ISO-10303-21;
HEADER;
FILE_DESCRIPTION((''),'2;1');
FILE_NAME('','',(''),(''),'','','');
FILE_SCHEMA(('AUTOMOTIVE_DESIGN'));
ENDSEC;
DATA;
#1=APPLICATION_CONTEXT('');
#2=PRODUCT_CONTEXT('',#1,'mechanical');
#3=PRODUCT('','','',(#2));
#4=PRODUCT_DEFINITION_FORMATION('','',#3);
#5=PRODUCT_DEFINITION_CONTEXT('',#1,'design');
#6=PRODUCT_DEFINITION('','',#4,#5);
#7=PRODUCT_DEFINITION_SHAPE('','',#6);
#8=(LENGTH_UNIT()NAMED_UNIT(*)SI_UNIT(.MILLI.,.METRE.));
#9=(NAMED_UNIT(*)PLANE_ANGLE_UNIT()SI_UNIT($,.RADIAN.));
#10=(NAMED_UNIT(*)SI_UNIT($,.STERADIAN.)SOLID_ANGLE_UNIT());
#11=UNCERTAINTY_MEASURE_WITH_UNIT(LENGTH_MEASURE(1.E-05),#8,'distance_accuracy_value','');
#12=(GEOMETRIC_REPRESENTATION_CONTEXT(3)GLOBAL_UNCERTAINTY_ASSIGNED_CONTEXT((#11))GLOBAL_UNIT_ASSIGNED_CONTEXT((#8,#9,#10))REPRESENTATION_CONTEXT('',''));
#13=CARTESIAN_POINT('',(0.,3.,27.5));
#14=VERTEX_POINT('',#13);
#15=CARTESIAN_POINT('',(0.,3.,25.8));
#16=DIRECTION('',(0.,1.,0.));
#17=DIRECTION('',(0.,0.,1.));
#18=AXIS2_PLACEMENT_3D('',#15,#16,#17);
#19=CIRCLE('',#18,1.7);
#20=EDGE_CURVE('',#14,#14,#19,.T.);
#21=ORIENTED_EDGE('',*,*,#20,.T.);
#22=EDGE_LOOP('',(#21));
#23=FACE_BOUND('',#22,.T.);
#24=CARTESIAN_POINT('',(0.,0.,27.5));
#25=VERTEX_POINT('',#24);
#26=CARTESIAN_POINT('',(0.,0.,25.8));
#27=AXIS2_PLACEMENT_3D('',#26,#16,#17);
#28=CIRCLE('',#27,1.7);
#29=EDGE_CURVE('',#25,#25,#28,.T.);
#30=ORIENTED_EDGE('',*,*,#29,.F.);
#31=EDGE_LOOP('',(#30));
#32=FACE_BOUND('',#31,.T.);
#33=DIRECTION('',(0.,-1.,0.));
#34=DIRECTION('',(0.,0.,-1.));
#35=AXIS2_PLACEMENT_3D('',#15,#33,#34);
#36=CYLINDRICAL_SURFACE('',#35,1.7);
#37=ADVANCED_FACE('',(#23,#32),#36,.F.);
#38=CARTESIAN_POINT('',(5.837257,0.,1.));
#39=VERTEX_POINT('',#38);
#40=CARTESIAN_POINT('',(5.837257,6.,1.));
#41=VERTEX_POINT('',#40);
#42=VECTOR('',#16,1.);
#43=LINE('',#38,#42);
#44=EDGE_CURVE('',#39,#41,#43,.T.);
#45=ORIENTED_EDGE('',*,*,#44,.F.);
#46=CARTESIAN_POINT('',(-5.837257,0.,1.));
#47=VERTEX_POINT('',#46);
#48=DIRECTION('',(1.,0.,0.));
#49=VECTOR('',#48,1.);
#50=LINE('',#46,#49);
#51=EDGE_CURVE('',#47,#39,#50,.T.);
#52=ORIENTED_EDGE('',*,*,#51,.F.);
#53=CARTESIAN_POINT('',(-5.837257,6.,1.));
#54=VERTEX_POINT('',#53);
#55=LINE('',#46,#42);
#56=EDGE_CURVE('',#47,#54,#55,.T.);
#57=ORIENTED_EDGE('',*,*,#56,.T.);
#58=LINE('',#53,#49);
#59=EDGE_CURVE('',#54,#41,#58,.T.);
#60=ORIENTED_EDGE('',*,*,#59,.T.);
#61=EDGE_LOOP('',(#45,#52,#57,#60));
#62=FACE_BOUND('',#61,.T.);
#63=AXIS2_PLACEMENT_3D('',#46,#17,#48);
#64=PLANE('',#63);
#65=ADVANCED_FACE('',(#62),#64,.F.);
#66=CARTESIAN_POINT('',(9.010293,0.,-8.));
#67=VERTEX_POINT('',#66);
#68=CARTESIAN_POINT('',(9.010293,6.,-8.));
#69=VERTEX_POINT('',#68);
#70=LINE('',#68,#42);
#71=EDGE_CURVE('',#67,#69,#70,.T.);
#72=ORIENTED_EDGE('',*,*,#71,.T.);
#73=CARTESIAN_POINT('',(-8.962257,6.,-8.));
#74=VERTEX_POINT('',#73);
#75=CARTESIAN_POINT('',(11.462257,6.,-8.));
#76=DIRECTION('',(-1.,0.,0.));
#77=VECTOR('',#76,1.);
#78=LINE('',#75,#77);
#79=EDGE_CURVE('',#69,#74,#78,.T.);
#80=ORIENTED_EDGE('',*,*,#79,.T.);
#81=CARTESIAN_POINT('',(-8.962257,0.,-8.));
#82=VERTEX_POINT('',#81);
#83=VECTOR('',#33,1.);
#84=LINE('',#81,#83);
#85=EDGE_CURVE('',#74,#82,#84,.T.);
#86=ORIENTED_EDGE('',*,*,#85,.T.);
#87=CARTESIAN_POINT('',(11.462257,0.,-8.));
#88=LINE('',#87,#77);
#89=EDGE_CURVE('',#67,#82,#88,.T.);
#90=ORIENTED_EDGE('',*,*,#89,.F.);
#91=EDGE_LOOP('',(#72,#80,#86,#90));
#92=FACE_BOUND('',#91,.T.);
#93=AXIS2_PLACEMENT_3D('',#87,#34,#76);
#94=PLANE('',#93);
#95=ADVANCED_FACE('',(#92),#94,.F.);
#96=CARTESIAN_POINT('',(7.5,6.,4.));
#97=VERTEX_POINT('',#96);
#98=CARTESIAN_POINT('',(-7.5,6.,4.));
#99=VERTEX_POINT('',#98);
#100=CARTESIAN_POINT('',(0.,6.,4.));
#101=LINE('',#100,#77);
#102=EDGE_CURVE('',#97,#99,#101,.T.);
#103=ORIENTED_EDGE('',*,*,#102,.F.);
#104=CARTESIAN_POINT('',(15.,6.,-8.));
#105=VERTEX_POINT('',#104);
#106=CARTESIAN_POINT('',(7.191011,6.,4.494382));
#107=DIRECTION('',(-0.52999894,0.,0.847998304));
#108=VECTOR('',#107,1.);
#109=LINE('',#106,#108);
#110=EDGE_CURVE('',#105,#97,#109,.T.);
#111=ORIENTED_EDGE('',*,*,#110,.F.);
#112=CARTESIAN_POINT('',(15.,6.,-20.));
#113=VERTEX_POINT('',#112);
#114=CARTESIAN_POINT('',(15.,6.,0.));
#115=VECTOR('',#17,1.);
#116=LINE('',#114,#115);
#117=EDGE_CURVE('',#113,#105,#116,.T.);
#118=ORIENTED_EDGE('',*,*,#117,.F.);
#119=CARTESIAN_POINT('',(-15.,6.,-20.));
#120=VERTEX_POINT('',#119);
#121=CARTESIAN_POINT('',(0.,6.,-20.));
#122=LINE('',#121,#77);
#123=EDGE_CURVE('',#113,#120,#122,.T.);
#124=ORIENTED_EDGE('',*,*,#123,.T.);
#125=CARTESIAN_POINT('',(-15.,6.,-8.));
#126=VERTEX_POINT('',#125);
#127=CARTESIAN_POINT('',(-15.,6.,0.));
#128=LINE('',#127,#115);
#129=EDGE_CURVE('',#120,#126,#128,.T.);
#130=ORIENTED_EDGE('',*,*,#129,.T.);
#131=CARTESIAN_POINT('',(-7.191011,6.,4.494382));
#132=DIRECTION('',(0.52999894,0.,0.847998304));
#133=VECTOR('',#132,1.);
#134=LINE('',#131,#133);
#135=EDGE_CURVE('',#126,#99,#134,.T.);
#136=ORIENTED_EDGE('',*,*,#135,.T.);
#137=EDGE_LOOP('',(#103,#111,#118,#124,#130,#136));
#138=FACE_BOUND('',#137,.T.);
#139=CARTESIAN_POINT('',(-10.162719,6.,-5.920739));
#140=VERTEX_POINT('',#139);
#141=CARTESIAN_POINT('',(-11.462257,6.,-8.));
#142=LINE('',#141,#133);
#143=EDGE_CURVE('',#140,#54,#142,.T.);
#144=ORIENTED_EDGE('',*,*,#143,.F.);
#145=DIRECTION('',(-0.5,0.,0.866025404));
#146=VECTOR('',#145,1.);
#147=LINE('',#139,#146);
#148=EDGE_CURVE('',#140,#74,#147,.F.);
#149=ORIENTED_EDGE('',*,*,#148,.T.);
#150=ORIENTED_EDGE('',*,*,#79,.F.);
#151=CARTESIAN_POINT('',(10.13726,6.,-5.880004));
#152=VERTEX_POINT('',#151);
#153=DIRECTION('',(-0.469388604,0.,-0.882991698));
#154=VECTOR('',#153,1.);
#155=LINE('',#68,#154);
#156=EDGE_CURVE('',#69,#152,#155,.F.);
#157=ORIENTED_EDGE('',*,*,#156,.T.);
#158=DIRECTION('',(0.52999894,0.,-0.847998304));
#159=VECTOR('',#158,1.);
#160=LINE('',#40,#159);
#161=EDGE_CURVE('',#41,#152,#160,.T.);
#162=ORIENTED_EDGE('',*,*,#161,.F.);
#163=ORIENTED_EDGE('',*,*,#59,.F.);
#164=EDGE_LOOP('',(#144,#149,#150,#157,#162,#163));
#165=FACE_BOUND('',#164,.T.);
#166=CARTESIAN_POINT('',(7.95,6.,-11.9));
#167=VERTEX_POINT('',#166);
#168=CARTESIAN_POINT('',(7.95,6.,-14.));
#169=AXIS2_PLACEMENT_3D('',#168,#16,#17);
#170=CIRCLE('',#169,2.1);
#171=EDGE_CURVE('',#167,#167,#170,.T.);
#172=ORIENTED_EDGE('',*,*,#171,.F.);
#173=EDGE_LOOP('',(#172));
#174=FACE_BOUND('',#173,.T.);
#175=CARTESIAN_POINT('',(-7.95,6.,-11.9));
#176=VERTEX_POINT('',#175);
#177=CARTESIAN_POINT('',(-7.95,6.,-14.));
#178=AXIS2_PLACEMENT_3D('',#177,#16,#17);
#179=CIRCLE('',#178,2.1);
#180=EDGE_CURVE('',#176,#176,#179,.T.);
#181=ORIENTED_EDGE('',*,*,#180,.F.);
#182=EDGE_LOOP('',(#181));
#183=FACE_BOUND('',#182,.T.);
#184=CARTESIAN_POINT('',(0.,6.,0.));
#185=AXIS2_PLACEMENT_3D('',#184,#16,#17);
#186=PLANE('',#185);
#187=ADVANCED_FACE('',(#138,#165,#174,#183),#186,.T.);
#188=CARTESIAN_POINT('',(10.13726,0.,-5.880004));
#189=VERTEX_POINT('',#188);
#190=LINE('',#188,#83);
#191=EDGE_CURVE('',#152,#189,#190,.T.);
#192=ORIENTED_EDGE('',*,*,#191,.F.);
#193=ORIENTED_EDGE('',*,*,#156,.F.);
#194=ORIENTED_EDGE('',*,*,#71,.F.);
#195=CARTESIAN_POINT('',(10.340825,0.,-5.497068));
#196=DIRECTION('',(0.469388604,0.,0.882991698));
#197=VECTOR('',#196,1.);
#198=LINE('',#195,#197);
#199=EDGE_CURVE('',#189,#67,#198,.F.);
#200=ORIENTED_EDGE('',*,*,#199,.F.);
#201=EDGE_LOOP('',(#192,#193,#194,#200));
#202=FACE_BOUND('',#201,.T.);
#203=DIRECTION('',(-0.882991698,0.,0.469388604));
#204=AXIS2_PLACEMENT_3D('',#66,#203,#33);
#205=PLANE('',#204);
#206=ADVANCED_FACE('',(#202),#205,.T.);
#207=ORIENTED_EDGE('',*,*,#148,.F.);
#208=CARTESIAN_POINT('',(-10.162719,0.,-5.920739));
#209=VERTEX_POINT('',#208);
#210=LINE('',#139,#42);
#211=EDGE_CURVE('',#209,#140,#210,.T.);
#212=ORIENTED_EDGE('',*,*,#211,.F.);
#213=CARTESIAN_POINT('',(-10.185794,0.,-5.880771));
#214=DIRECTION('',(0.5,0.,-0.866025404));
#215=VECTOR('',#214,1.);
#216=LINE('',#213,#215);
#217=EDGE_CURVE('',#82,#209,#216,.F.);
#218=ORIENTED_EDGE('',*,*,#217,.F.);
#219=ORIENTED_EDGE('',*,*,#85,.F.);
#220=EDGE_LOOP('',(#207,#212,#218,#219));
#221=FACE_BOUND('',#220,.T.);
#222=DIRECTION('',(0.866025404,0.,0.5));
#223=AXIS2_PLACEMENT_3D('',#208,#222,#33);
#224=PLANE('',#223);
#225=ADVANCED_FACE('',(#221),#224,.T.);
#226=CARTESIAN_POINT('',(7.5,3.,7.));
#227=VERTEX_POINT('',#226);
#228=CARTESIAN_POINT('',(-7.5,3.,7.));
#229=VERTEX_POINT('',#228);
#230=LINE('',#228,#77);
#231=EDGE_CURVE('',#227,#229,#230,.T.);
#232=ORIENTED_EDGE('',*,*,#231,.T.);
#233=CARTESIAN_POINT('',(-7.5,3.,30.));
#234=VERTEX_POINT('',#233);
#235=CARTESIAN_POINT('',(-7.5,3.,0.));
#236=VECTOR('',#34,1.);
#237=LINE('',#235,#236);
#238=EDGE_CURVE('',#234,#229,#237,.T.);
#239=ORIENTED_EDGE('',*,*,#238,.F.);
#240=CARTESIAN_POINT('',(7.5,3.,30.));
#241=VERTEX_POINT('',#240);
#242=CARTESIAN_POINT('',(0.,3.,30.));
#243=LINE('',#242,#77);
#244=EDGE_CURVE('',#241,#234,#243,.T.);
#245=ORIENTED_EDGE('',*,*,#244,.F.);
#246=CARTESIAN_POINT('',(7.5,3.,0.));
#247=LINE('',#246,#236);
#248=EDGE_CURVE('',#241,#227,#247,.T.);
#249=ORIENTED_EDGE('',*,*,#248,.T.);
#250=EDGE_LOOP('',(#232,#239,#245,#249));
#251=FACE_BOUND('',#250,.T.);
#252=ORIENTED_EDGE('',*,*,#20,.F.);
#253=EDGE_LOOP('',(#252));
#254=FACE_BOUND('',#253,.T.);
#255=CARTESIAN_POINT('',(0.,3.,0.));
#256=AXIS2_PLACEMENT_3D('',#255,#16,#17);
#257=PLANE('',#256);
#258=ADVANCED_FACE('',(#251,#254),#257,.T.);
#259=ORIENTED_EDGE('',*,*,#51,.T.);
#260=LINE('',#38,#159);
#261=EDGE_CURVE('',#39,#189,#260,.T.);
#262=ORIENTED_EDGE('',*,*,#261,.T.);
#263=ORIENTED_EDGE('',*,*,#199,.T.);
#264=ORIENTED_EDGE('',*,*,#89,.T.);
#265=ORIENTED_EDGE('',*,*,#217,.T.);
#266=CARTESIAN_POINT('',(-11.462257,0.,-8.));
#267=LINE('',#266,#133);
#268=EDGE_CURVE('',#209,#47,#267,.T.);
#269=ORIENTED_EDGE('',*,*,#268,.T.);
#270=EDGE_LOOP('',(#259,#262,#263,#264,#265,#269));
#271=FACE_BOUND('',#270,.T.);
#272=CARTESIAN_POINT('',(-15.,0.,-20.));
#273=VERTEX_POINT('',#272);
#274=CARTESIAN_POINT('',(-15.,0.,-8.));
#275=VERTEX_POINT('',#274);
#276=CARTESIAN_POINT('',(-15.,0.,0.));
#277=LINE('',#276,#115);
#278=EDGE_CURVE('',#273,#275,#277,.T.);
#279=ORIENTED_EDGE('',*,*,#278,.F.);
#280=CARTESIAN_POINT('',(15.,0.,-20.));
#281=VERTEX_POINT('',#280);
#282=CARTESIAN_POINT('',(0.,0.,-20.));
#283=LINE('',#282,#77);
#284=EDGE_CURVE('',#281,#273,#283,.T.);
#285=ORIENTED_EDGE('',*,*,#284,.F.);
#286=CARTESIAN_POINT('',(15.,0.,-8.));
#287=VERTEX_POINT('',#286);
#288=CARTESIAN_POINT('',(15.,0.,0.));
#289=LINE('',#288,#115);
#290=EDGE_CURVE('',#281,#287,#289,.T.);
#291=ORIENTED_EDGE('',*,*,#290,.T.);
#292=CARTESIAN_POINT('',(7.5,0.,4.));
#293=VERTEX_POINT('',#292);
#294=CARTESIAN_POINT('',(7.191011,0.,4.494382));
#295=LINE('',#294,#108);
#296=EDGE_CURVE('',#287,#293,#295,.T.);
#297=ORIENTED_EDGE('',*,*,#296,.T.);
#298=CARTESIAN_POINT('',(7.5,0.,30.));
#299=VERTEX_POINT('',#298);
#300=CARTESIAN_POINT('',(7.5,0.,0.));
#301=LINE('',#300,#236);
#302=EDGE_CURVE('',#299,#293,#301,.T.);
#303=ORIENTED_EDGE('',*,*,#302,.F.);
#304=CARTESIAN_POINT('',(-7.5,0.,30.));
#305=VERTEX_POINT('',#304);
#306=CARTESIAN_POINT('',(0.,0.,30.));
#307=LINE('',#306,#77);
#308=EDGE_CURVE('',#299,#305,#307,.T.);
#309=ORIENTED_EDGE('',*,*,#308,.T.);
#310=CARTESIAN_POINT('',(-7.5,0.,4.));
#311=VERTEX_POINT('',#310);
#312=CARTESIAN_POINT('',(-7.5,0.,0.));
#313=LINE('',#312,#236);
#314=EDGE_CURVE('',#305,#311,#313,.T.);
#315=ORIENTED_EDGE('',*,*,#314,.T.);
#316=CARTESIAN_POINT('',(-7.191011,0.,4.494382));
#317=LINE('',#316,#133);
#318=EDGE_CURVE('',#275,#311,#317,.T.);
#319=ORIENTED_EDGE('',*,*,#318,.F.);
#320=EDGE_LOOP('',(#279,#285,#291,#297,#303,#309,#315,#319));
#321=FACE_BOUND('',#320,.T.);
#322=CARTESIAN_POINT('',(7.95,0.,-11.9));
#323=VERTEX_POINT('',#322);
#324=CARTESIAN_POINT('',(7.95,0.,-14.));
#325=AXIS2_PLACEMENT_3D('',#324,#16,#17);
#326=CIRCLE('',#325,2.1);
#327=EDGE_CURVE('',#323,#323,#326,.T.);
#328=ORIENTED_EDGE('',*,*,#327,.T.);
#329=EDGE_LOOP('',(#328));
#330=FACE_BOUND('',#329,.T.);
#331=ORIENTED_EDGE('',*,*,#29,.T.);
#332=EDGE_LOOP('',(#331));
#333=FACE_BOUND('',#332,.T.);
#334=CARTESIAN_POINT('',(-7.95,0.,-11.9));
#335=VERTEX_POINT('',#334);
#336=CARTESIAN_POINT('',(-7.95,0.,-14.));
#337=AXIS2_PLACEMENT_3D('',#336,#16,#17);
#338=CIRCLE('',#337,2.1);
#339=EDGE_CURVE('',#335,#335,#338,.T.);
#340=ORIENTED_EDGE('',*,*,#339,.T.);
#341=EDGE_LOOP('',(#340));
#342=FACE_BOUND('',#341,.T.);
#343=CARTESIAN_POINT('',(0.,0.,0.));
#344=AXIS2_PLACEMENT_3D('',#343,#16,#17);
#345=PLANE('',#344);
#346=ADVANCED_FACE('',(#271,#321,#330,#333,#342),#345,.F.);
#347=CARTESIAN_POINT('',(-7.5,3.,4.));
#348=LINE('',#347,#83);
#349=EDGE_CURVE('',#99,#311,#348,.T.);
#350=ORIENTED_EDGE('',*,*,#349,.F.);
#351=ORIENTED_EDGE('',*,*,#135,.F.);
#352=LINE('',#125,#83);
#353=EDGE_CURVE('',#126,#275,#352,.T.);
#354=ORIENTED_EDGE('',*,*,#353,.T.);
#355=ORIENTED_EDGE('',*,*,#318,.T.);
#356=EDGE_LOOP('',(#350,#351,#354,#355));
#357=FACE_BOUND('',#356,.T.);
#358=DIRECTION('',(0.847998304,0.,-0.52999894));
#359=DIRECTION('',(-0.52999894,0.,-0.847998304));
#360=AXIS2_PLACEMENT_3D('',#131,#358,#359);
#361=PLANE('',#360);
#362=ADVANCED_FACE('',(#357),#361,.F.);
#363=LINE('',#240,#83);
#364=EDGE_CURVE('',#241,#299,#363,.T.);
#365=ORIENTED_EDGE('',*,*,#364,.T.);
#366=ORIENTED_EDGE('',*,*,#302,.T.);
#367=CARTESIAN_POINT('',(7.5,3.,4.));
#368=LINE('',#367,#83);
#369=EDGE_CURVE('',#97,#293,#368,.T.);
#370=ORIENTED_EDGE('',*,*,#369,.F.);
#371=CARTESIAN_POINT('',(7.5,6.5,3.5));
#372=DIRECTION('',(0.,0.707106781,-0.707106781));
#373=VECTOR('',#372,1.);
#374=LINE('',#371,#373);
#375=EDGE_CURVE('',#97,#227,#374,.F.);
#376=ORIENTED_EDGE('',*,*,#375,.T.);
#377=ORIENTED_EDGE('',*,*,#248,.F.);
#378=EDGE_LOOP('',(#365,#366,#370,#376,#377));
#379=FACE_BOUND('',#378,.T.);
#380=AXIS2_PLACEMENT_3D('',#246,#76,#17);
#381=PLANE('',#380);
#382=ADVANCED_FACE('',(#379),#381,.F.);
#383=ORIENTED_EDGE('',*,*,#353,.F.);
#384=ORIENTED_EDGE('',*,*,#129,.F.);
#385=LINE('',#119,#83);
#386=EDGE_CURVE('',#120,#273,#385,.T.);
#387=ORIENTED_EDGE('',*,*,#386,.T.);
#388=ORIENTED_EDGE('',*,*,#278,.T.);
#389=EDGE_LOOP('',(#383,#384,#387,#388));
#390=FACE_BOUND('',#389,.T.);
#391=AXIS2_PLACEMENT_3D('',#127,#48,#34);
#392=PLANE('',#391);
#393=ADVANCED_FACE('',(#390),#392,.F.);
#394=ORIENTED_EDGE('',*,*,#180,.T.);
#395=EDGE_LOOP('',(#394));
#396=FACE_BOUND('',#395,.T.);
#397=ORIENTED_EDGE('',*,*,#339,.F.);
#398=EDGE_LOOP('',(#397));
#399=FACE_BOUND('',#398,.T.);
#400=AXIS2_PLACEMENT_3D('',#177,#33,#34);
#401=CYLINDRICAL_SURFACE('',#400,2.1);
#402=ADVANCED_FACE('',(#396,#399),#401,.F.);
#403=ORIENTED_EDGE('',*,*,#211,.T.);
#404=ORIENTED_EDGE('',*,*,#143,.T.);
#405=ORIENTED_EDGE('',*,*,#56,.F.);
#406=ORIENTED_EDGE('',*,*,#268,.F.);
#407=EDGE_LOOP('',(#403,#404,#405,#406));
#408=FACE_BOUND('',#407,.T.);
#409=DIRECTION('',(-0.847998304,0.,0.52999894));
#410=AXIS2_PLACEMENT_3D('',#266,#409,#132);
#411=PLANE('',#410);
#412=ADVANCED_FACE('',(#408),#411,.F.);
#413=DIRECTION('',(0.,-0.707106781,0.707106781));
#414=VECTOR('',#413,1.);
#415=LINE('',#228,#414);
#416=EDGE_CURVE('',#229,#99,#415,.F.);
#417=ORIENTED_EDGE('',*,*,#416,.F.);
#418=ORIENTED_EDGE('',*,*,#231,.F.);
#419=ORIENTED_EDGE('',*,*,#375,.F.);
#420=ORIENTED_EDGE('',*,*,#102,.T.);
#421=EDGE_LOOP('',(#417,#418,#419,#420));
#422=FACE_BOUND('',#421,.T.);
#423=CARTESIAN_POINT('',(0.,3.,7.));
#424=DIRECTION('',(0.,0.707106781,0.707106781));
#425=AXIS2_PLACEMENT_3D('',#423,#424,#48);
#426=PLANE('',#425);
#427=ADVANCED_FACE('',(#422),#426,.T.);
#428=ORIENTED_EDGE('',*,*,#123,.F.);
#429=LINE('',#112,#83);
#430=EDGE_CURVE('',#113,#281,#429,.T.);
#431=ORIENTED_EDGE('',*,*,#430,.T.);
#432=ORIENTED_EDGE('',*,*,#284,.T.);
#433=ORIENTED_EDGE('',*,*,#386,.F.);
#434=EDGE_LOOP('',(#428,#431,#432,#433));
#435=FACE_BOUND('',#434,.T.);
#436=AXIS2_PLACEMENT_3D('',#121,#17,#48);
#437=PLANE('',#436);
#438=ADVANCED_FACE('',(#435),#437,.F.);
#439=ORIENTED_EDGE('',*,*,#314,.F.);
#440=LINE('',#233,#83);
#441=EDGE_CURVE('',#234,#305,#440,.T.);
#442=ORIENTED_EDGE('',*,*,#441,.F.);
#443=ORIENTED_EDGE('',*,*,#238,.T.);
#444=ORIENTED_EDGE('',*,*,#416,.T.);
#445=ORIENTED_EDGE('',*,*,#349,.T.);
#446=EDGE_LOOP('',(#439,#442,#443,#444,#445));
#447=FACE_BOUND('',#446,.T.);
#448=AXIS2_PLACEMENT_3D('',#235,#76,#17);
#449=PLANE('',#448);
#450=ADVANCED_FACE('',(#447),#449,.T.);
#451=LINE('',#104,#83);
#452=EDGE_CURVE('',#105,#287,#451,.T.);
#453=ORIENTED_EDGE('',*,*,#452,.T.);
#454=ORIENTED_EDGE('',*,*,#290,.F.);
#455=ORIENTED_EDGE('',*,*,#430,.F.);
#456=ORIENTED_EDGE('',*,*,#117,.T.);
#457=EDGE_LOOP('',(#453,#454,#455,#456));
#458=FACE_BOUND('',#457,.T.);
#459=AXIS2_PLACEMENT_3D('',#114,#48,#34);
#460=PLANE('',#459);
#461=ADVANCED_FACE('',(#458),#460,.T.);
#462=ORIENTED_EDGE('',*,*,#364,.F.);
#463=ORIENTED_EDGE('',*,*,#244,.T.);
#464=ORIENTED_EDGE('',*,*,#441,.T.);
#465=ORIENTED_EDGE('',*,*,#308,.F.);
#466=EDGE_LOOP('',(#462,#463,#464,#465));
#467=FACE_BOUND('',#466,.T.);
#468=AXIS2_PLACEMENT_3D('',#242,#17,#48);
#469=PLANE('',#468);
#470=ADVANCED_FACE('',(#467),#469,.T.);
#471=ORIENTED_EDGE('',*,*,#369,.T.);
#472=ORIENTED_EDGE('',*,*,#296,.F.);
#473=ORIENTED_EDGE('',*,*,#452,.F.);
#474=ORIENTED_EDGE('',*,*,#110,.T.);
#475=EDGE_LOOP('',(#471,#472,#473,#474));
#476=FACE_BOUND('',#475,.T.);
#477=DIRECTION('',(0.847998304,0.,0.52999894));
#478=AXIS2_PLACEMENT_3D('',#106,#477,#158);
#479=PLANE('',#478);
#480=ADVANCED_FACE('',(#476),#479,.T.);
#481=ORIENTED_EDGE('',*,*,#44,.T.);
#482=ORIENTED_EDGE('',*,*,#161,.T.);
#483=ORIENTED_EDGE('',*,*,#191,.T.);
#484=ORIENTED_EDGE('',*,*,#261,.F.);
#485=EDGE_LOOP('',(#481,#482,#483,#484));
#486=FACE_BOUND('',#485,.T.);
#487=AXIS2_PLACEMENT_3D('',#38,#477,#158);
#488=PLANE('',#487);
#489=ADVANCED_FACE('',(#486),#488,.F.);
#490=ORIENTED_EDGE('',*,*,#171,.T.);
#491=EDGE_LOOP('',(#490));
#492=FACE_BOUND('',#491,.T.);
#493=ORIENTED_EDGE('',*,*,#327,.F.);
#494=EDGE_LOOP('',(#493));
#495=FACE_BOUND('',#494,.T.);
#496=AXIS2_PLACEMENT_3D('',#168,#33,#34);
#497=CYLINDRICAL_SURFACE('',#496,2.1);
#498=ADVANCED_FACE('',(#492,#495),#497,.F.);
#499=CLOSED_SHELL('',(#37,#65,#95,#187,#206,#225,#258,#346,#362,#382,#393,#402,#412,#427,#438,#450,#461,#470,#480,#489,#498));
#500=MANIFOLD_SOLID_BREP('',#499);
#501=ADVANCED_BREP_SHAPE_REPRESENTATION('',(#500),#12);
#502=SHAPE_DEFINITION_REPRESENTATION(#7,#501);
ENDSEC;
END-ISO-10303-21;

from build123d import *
from OCP.BRepFilletAPI import BRepFilletAPI_MakeChamfer

# Parameters (mm, degrees)
SKETCH1_W           = 15
SKETCH1_H           = 12
BOSS_EXTRUDE1_DEPTH = 6
SKETCH1_3_W         = 15
SKETCH1_3_H         = 26
SKETCH1_3_R         = 1.7
BOSS_EXTRUDE2_DEPTH = 3
CHAMFER1_SIZE       = 3
CUT_EXTRUDE1_DEPTH  = 6
CHAMFER2_SIZE       = 2.5
CHAMFER2_SIZE2      = 2.451963608


with BuildPart() as part:
    # Sketch1 → Boss-Extrude1 (new body)
    with BuildSketch(Plane(origin=(0, 0, 0), x_dir=(-1, 0, 0), z_dir=(0, 1, 0))):
        with BuildLine():
            Line((-7.5, -8), (-15, -8))
            Line((-15, -8), (-15, -20))
            Line((-15, -20), (-7.5, -20))
            Line((-7.5, -20), (-7.5, -16.05121915))
            ThreePointArc((-7.5, -16.05121915), (-10.05, -14), (-7.5, -11.94878085))
            Line((-7.5, -11.94878085), (-7.5, -8))
        make_face()
        with BuildLine():
            Line((7.5, -8), (-7.5, -8))
            Line((-7.5, -8), (-7.5, -11.94878085))
            ThreePointArc((-7.5, -11.94878085), (-6.313693183, -12.683755342), (-5.85, -14))
            ThreePointArc((-5.85, -14), (-6.313693183, -15.316244658), (-7.5, -16.05121915))
            Line((-7.5, -16.05121915), (-7.5, -20))
            Line((-7.5, -20), (7.5, -20))
            Line((7.5, -20), (7.5, -16.05121915))
            ThreePointArc((7.5, -16.05121915), (5.85, -14), (7.5, -11.94878085))
            Line((7.5, -11.94878085), (7.5, -8))
        make_face()
        with BuildLine():
            Line((15, -8), (7.5, -8))
            Line((7.5, -8), (7.5, -11.94878085))
            ThreePointArc((7.5, -11.94878085), (9.266244658, -12.363693183), (10.05, -14))
            ThreePointArc((10.05, -14), (9.266244658, -15.636306817), (7.5, -16.05121915))
            Line((7.5, -16.05121915), (7.5, -20))
            Line((7.5, -20), (15, -20))
            Line((15, -20), (15, -8))
        make_face()
        Polygon((15, -8), (7.5, 4), (7.5, -8), align=None)
        with Locations((0, -2)):
            Rectangle(SKETCH1_W, SKETCH1_H)
        Polygon((-7.5, 4), (-15, -8), (-7.5, -8), align=None)
    extrude(amount=BOSS_EXTRUDE1_DEPTH)

    # Sketch1<3> → Boss-Extrude2 (add)
    with BuildSketch(Plane(origin=(0, 0, 0), x_dir=(-1, 0, 0), z_dir=(0, 1, 0))):
        with Locations((0, 17)):
            Rectangle(SKETCH1_3_W, SKETCH1_3_H)
        with Locations(Location((0, 25.8, 0), (0, 0, 90))):
            Circle(SKETCH1_3_R, mode=Mode.SUBTRACT)
    extrude(amount=BOSS_EXTRUDE2_DEPTH)

    # Chamfer1
    chamfer1_edges = [part.edges().sort_by_distance(p)[0] for p in [
        (0, 3, 4),
    ]]
    chamfer(chamfer1_edges, length=CHAMFER1_SIZE - 0.0001)  # a hair under: the kernel refuses the full size

    # Sketch2 → Cut-Extrude1 (cut)
    with BuildSketch(Plane(origin=(0, 6, 0), x_dir=(-1, 0, 0), z_dir=(0, 1, 0))):
        Polygon((-5.837257075, 1), (-11.462257075, -8), (11.462257075, -8), (5.837257075, 1), align=None)
    extrude(amount=-CUT_EXTRUDE1_DEPTH, mode=Mode.SUBTRACT)

    # Chamfer2: one chamfer whose edges measure the first distance from different faces: ONE call of the kernel's chamfer builder (chamfer() names one face for all edges)
    chamfer2_edges_1 = [part.edges().sort_by_distance(p)[0] for p in [
        (-11.462257075, 3, -8),
    ]]
    chamfer2_side_1 = [part.faces().sort_by_distance(p)[0] for p in [
        (0, 3, -8),
    ]]
    chamfer2_edges_2 = [part.edges().sort_by_distance(p)[0] for p in [
        (11.462257075, 3, -8),
    ]]
    chamfer2_side_2 = [part.faces().sort_by_distance(p)[0] for p in [
        (8.649757075, 3, -3.5),
    ]]
    chamfer2 = BRepFilletAPI_MakeChamfer(part.part.solid().wrapped)
    for e in chamfer2_edges_1:
        chamfer2.Add(CHAMFER2_SIZE, CHAMFER2_SIZE2, e.wrapped, chamfer2_side_1[0].wrapped)  # the first distance lies on this face
    for e in chamfer2_edges_2:
        chamfer2.Add(CHAMFER2_SIZE, CHAMFER2_SIZE2, e.wrapped, chamfer2_side_2[0].wrapped)  # the first distance lies on this face
    add(Compound.cast(chamfer2.Shape()), mode=Mode.REPLACE)


solid = part.part
